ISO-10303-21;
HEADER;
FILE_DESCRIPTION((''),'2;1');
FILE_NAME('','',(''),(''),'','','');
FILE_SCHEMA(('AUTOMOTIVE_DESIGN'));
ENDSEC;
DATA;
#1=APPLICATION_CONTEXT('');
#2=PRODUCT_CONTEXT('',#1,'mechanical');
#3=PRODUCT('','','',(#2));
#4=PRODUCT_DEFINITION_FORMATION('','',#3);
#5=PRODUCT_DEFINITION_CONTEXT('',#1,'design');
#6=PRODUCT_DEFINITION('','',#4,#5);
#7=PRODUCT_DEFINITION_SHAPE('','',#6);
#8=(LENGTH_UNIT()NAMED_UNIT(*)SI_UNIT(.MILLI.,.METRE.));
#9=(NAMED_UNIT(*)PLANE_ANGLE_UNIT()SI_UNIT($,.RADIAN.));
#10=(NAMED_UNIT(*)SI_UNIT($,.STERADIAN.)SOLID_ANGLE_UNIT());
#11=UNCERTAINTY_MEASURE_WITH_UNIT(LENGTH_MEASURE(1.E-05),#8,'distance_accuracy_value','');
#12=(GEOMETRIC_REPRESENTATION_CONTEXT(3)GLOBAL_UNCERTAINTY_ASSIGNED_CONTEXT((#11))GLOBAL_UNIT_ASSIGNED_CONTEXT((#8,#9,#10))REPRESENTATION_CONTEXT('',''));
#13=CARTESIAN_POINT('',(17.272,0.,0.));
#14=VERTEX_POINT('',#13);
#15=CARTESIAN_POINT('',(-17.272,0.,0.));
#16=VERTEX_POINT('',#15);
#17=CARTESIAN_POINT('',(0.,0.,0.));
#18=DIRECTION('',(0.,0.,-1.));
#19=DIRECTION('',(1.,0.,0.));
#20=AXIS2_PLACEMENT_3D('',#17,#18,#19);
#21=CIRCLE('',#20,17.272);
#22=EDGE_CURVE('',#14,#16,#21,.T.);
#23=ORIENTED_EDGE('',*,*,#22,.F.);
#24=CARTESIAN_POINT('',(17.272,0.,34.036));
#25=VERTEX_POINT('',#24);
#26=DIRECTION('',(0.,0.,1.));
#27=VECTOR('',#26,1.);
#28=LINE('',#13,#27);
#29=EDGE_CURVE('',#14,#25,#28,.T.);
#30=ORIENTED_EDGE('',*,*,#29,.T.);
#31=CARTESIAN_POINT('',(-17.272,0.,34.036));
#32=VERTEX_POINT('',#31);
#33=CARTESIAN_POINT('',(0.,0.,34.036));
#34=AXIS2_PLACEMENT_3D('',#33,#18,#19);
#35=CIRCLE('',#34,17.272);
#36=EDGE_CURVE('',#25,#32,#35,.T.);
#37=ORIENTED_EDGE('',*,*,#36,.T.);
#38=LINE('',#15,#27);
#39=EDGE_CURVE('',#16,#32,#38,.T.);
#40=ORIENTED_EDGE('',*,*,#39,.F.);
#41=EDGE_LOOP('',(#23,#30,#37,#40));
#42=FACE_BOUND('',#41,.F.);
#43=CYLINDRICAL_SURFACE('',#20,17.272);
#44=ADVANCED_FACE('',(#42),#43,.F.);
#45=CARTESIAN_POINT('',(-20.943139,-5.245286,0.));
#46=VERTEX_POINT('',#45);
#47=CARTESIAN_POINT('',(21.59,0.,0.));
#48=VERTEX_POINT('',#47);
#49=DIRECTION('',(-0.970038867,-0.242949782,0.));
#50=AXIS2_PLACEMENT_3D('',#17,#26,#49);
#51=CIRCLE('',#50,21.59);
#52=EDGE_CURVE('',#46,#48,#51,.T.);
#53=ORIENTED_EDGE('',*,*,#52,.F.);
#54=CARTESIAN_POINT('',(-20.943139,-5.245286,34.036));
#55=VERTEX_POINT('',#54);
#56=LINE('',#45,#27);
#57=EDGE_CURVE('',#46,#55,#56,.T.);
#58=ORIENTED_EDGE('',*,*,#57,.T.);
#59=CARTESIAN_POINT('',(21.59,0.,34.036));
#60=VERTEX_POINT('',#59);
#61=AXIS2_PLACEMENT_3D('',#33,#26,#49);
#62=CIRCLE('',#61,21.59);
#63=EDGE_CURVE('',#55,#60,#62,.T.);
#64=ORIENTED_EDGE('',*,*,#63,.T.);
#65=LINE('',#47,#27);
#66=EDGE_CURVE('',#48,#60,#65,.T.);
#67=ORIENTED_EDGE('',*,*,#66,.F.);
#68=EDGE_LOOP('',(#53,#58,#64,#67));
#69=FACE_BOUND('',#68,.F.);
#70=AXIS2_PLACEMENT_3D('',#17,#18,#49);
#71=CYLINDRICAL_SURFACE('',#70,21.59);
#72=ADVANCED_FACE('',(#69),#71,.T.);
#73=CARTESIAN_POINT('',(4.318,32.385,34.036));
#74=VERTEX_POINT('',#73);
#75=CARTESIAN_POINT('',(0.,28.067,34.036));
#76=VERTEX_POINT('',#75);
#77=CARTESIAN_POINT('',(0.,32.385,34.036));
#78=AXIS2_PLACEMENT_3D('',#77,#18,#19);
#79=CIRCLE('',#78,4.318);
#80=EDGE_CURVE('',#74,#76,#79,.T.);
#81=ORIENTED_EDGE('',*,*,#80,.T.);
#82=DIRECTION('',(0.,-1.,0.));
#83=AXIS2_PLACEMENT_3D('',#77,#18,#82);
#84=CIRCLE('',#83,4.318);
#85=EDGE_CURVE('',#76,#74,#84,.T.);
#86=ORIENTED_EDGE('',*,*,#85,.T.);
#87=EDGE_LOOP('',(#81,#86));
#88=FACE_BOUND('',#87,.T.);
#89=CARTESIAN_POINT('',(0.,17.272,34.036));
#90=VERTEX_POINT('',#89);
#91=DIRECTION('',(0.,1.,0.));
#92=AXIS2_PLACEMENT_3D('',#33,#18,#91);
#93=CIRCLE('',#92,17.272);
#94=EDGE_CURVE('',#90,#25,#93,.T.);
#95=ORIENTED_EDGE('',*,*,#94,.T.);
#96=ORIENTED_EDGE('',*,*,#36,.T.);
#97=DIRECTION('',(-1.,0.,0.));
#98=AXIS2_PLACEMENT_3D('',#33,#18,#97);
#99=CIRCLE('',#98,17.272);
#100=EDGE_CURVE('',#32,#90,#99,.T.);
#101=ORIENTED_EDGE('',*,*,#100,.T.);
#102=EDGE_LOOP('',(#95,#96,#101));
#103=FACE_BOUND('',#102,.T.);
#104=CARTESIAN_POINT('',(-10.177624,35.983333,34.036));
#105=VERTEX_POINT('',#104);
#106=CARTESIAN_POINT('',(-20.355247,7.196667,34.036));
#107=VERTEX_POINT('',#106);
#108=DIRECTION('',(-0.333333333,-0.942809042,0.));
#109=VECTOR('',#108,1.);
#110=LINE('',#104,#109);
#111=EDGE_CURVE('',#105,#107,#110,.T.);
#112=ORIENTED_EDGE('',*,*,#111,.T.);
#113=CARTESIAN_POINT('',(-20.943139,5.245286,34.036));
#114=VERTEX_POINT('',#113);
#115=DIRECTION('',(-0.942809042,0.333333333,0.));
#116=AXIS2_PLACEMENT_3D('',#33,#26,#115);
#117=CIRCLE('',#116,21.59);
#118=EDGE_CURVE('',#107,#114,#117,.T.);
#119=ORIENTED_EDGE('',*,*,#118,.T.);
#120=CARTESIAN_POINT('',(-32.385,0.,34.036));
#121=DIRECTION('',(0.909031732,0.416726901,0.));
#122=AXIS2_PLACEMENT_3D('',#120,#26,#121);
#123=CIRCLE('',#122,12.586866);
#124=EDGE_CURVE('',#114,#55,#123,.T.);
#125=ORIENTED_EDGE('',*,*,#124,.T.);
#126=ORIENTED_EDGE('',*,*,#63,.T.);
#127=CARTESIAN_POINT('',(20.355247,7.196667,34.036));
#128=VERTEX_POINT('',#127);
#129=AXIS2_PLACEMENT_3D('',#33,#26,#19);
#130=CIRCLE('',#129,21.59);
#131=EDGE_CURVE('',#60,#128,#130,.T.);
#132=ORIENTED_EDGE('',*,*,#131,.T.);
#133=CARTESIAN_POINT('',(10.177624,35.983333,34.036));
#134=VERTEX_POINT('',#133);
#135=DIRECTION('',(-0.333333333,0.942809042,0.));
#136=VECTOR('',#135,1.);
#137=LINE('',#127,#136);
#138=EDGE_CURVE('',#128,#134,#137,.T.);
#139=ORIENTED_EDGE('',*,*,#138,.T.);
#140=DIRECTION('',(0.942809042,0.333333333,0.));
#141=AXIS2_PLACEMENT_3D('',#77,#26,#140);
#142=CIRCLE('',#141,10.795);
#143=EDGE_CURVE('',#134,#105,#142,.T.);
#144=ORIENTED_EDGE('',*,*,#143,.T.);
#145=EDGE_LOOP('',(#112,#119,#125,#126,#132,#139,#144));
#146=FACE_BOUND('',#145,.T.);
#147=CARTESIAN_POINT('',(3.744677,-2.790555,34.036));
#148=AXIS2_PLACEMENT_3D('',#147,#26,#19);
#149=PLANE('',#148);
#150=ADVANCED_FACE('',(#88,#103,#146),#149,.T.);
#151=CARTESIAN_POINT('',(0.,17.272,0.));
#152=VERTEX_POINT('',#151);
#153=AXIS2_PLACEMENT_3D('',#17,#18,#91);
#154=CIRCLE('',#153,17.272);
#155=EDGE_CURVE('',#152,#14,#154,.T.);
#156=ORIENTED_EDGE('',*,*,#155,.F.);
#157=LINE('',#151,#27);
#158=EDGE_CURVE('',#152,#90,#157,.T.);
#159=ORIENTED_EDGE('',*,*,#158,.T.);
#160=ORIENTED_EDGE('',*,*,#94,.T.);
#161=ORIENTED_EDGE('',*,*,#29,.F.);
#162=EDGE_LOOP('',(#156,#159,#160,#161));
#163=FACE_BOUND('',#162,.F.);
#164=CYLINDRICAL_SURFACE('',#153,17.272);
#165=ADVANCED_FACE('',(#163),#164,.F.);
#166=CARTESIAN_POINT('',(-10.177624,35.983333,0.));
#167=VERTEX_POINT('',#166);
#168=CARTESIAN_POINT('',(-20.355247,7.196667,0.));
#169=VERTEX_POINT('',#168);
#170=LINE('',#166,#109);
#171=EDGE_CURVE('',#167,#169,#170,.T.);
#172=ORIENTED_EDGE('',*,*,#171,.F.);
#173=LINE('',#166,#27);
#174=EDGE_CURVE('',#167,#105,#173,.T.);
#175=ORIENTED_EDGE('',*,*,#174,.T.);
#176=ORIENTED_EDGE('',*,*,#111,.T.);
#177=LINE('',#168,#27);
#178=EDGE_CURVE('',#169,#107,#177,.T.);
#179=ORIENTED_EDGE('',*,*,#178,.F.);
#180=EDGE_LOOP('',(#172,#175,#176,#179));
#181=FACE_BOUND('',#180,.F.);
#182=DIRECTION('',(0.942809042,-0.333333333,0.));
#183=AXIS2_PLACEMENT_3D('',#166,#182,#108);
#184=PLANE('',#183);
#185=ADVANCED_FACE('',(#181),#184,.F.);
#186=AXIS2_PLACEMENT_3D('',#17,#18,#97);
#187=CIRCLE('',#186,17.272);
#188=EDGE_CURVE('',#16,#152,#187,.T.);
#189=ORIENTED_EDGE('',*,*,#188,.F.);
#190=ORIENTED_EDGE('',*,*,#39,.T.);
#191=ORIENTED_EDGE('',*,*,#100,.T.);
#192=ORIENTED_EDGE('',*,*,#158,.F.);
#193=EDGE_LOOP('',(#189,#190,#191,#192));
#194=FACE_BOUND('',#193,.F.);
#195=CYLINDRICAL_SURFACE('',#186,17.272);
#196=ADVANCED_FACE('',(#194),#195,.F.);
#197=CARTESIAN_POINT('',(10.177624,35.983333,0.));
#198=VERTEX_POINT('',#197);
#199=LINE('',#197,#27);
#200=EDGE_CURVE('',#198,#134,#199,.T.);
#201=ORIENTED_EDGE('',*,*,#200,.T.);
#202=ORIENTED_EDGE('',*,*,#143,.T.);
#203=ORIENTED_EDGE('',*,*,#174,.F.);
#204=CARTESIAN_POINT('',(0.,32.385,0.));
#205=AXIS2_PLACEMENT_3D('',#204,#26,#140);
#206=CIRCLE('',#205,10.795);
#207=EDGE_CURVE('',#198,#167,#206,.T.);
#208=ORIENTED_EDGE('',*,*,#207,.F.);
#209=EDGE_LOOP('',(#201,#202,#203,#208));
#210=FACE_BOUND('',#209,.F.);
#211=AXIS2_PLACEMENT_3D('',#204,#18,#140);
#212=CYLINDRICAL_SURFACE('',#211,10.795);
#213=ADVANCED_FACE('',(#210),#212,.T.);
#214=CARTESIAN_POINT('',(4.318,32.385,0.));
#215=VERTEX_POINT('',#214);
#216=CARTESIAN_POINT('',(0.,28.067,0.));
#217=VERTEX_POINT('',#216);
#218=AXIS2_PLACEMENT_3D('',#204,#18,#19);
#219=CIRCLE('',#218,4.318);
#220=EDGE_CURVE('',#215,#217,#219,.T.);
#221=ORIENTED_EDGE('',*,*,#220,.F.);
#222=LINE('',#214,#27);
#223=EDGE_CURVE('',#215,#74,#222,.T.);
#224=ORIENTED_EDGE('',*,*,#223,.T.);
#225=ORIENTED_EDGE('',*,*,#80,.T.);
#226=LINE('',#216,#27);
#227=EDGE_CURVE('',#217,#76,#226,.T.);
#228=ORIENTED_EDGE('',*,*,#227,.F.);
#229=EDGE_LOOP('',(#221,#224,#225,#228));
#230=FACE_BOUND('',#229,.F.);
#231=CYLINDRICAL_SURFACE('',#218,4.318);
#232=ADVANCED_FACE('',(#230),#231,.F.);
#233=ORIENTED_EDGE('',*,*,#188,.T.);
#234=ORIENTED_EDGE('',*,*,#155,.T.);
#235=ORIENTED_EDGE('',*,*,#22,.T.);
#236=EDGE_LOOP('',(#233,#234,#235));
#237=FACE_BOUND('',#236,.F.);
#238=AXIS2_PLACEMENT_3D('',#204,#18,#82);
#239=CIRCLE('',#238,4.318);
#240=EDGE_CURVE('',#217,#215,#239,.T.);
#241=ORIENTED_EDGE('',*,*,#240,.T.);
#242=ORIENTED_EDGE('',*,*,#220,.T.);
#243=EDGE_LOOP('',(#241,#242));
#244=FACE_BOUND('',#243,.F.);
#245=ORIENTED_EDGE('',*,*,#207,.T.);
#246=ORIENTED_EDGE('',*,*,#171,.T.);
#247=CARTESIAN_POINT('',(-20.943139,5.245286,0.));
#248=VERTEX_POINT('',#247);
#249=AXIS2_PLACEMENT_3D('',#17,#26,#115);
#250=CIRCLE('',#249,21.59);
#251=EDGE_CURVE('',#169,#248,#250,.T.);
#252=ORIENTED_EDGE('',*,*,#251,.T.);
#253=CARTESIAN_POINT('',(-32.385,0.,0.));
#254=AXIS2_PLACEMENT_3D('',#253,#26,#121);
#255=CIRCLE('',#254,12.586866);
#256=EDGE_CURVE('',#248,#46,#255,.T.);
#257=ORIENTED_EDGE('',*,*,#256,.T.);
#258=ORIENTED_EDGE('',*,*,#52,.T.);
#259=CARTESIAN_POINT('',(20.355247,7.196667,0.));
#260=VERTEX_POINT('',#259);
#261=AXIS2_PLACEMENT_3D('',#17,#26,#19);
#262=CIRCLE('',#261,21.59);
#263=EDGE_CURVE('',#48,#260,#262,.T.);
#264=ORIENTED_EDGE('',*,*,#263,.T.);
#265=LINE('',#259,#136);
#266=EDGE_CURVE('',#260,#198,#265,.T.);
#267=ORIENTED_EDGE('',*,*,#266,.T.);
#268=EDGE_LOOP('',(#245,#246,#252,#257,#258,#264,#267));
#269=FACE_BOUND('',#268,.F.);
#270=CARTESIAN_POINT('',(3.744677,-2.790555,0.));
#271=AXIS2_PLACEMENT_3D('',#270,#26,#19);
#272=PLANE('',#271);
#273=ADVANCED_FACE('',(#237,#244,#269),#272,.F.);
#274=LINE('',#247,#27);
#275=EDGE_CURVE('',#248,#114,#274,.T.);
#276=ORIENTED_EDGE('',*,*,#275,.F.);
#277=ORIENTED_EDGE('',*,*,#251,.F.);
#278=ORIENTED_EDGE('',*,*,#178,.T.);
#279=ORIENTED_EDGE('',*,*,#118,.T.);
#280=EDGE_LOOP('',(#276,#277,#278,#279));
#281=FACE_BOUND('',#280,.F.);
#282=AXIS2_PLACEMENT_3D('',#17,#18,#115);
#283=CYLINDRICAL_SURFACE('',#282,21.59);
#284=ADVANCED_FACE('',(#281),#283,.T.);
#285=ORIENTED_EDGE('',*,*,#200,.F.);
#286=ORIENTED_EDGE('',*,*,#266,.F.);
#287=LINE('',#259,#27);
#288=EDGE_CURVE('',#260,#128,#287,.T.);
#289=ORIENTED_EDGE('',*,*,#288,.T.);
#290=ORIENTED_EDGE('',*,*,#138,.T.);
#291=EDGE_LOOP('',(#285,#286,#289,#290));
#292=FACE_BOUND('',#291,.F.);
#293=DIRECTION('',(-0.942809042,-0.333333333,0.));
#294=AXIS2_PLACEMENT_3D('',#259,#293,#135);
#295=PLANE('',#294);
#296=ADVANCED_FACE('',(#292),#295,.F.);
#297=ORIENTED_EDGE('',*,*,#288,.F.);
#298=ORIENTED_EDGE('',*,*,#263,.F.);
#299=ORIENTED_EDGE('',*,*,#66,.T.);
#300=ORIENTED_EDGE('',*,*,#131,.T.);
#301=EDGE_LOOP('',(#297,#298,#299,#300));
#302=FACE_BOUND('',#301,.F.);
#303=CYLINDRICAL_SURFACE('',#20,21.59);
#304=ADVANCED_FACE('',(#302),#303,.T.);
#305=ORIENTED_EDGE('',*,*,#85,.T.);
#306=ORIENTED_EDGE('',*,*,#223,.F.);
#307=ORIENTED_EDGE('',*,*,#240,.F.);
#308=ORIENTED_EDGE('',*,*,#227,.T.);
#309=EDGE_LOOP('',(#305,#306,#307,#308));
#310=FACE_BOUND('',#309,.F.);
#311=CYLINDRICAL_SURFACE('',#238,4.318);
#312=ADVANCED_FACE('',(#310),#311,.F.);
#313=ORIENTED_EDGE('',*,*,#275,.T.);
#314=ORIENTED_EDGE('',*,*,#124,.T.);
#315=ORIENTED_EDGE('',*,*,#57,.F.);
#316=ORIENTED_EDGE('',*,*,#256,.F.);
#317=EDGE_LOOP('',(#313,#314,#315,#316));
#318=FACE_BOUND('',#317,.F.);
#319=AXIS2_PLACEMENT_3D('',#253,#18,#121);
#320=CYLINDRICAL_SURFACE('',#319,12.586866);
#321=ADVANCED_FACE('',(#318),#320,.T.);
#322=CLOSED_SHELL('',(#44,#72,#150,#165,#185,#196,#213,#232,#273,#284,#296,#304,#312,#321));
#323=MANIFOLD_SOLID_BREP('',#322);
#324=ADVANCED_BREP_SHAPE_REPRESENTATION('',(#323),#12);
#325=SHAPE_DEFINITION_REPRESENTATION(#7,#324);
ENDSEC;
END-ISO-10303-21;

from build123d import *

# Parameters (mm, degrees)
F2_DEPTH = 34.036


# Not quite as in the source:
# - a variable given as a bare number and used for a length is read in inches; the dataset says mm whatever the document's units were


with BuildPart() as f2:
    # F1 (on Top) → F2 (new body)
    with BuildSketch(Plane.XY):
        with BuildLine():
            ThreePointArc((-20.9431391397, -5.2452857858), (2.6425107354, -21.4276745592), (21.59, 0))
            ThreePointArc((21.59, 0), (21.2790729029, 3.6509117207), (20.3552472078, 7.1966666667))
            ThreePointArc((20.3552472078, 7.1966666667), (12.4649923156, 17.6281611796), (9.2e-09, 21.59))
            Line((0, 21.59), (0, 17.272))
            ThreePointArc((0, 17.272), (12.2131483247, 12.2131483247), (17.272, 0))
            ThreePointArc((17.272, 0), (0, -17.272), (-17.272, 0))
            Line((-17.272, 0), (-19.7981337132, 0))
            ThreePointArc((-19.7981337132, 0), (-20.0877162422, -2.6844021868), (-20.9431391397, -5.2452857858))
        make_face()
        with BuildLine():
            ThreePointArc((9.2e-09, 21.59), (12.4649923156, 17.6281611796), (20.3552472078, 7.1966666667))
            Line((20.3552472078, 7.1966666667), (10.1776236039, 35.9833333333))
            ThreePointArc((10.1776236039, 35.9833333333), (10.6395364515, 34.2104558603), (10.795, 32.385))
            ThreePointArc((10.795, 32.385), (7.6332177062, 24.7517823004), (9.2e-09, 21.59))
        make_face()
        with BuildLine():
            ThreePointArc((-20.9431391397, 5.2452857858), (-44.9718662868, 0), (-20.9431391397, -5.2452857858))
            ThreePointArc((-20.9431391397, -5.2452857858), (-21.4276745592, -2.6425107354), (-21.59, 0))
            ThreePointArc((-21.59, 0), (-21.4276745592, 2.6425107354), (-20.9431391397, 5.2452857858))
        make_face()
        with BuildLine():
            ThreePointArc((-21.59, 0), (-21.4276745592, -2.6425107354), (-20.9431391397, -5.2452857858))
            ThreePointArc((-20.9431391397, -5.2452857858), (-20.0877162422, -2.6844021868), (-19.7981337132, 0))
            Line((-19.7981337132, 0), (-21.59, 0))
        make_face()
        with BuildLine():
            Line((0, 17.272), (0, 21.59))
            ThreePointArc((9.2e-09, 21.59), (-12.464992308, 17.6281611849), (-20.3552472078, 7.1966666667))
            ThreePointArc((-20.3552472078, 7.1966666667), (-20.6722313881, 6.2279169422), (-20.9431391397, 5.2452857858))
            ThreePointArc((-20.9431391397, 5.2452857858), (-20.0877162422, 2.6844021868), (-19.7981337132, 0))
            Line((-19.7981337132, 0), (-17.272, 0))
            ThreePointArc((-17.272, 0), (-12.2131483247, 12.2131483247), (0, 17.272))
        make_face()
        with BuildLine():
            ThreePointArc((-20.3552472078, 7.1966666667), (-12.464992308, 17.6281611849), (9.2e-09, 21.59))
            ThreePointArc((9.2e-09, 21.59), (-8.8140805884, 26.1525038403), (-10.1776236039, 35.9833333333))
            Line((-10.1776236039, 35.9833333333), (-20.3552472078, 7.1966666667))
        make_face()
        with BuildLine():
            ThreePointArc((-10.1776236039, 35.9833333333), (-8.8140805884, 26.1525038403), (9.2e-09, 21.59))
            ThreePointArc((9.2e-09, 21.59), (7.6332177062, 24.7517823004), (10.795, 32.385))
            ThreePointArc((10.795, 32.385), (10.6395364515, 34.2104558603), (10.1776236039, 35.9833333333))
            ThreePointArc((10.1776236039, 35.9833333333), (0, 43.18), (-10.1776236039, 35.9833333333))
        make_face()
        with BuildLine():
            ThreePointArc((4.318, 32.385), (3.0532870812, 29.3317129188), (0, 28.067))
            ThreePointArc((0, 28.067), (-3.0532870812, 35.4382870812), (4.318, 32.385))
        make_face(mode=Mode.SUBTRACT)
        with BuildLine():
            ThreePointArc((-20.9431391397, 5.2452857858), (-21.4276745592, 2.6425107354), (-21.59, 0))
            Line((-21.59, 0), (-19.7981337132, 0))
            ThreePointArc((-19.7981337132, 0), (-20.0877162422, 2.6844021868), (-20.9431391397, 5.2452857858))
        make_face()
    extrude(amount=F2_DEPTH)


solid = f2.part
